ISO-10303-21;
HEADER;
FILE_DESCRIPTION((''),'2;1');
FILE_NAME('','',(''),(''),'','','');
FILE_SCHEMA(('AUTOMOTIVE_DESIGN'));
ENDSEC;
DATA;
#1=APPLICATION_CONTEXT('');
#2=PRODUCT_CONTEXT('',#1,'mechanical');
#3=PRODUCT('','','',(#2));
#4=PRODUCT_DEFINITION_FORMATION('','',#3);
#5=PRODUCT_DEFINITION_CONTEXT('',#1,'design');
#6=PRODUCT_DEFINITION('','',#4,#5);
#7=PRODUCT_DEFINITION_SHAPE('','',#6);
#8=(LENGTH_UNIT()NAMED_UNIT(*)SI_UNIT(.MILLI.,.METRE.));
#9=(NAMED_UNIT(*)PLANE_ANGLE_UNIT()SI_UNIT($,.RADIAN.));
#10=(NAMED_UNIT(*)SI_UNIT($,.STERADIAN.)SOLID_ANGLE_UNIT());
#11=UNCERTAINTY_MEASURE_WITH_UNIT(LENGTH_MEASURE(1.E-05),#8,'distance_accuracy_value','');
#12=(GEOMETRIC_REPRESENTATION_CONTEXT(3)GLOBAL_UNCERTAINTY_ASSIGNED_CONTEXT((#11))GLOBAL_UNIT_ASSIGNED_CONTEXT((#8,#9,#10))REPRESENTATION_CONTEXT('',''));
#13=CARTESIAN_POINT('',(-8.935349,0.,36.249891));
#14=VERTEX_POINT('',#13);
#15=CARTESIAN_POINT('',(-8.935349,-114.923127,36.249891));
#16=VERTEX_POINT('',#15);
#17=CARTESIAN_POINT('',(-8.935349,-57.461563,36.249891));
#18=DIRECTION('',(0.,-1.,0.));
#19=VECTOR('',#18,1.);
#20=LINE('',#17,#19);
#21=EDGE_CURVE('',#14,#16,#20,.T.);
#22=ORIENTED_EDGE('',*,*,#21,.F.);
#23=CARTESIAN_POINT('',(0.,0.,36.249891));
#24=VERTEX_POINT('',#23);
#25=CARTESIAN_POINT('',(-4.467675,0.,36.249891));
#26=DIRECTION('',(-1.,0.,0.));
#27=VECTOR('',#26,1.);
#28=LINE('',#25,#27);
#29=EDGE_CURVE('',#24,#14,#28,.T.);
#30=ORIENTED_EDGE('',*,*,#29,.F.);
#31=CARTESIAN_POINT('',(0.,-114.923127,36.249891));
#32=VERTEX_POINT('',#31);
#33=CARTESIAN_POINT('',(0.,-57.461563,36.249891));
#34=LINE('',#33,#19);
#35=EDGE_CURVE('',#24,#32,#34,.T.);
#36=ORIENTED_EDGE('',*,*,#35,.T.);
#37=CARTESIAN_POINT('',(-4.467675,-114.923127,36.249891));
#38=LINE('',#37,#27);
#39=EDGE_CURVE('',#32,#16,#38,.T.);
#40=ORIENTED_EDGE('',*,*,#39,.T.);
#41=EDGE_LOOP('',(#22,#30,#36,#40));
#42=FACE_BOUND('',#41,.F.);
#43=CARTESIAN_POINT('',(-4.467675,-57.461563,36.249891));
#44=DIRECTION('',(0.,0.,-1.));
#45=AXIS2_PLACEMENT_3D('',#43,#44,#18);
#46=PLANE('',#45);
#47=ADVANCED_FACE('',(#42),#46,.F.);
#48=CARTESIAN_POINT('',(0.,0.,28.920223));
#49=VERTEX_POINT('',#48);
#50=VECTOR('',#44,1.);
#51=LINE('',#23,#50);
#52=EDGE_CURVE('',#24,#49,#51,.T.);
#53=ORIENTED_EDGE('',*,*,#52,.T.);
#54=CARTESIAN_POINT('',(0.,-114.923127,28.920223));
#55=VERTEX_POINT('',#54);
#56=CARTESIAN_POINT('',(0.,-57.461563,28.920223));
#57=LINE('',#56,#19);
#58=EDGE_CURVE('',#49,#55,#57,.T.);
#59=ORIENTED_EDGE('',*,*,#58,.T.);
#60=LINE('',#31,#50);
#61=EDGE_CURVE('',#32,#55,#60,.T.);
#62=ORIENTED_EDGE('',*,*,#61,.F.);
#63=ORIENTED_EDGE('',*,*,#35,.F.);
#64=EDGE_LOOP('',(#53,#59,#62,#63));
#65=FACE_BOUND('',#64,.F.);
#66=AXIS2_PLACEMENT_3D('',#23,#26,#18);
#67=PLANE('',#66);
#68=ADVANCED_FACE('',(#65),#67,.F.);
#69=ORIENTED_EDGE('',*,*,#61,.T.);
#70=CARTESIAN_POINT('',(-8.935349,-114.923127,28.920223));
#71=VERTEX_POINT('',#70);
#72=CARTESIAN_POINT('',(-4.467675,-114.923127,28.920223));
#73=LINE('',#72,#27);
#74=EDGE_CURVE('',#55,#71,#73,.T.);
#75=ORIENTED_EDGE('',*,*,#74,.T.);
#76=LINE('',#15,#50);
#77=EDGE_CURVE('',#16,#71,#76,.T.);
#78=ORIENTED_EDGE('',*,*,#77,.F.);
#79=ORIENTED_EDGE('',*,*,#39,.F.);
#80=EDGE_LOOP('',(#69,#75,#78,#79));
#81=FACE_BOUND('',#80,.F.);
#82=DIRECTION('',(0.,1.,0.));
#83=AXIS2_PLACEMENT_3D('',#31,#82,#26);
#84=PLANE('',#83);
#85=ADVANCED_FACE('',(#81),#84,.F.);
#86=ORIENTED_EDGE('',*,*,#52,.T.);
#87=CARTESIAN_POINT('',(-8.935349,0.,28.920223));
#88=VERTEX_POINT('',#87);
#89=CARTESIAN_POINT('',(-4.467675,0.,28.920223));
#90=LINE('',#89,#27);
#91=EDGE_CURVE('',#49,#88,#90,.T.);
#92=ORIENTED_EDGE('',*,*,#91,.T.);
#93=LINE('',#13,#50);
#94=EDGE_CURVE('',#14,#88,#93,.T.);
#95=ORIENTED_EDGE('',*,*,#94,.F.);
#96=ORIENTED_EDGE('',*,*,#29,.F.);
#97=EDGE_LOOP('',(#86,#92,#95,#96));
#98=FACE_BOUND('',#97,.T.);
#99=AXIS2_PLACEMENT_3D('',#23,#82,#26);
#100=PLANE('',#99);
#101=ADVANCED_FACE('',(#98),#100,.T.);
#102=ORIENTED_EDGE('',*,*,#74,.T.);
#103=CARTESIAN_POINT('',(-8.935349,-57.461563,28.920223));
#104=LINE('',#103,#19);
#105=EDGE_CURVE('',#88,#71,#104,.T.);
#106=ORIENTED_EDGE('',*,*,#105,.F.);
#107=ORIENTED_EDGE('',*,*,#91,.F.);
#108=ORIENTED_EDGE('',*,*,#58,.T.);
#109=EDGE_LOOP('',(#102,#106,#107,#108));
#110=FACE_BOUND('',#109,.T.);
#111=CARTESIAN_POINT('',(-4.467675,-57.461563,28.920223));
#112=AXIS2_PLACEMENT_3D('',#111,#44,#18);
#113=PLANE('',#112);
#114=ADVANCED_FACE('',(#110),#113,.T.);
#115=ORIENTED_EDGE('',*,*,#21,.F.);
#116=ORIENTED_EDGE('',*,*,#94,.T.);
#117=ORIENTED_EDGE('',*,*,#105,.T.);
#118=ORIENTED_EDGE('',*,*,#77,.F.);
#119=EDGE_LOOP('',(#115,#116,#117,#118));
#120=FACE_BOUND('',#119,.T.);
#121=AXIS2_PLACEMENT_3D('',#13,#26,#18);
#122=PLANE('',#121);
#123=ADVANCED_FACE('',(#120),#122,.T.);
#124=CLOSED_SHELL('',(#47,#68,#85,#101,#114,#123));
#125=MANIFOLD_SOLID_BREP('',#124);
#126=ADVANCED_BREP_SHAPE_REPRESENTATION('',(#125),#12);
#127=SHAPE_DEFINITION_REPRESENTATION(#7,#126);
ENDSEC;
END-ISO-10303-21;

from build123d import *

# Parameters (mm, degrees)
F1_E0_TOP_W = 114.9231269956
F1_E0_TOP_H = 8.9353490621
F2_DEPTH    = 7.3296674527


with BuildPart() as f2:
    # F1_E0_top (on explicit) → F2 (new body)
    with BuildSketch(Plane(origin=(0, 0, 36.2498909235), x_dir=(0, -1, 0), z_dir=(0, 0, -1))):
        with Locations((57.4615634978, 4.467674531)):
            Rectangle(F1_E0_TOP_W, F1_E0_TOP_H)
    extrude(amount=F2_DEPTH)


solid = f2.part
